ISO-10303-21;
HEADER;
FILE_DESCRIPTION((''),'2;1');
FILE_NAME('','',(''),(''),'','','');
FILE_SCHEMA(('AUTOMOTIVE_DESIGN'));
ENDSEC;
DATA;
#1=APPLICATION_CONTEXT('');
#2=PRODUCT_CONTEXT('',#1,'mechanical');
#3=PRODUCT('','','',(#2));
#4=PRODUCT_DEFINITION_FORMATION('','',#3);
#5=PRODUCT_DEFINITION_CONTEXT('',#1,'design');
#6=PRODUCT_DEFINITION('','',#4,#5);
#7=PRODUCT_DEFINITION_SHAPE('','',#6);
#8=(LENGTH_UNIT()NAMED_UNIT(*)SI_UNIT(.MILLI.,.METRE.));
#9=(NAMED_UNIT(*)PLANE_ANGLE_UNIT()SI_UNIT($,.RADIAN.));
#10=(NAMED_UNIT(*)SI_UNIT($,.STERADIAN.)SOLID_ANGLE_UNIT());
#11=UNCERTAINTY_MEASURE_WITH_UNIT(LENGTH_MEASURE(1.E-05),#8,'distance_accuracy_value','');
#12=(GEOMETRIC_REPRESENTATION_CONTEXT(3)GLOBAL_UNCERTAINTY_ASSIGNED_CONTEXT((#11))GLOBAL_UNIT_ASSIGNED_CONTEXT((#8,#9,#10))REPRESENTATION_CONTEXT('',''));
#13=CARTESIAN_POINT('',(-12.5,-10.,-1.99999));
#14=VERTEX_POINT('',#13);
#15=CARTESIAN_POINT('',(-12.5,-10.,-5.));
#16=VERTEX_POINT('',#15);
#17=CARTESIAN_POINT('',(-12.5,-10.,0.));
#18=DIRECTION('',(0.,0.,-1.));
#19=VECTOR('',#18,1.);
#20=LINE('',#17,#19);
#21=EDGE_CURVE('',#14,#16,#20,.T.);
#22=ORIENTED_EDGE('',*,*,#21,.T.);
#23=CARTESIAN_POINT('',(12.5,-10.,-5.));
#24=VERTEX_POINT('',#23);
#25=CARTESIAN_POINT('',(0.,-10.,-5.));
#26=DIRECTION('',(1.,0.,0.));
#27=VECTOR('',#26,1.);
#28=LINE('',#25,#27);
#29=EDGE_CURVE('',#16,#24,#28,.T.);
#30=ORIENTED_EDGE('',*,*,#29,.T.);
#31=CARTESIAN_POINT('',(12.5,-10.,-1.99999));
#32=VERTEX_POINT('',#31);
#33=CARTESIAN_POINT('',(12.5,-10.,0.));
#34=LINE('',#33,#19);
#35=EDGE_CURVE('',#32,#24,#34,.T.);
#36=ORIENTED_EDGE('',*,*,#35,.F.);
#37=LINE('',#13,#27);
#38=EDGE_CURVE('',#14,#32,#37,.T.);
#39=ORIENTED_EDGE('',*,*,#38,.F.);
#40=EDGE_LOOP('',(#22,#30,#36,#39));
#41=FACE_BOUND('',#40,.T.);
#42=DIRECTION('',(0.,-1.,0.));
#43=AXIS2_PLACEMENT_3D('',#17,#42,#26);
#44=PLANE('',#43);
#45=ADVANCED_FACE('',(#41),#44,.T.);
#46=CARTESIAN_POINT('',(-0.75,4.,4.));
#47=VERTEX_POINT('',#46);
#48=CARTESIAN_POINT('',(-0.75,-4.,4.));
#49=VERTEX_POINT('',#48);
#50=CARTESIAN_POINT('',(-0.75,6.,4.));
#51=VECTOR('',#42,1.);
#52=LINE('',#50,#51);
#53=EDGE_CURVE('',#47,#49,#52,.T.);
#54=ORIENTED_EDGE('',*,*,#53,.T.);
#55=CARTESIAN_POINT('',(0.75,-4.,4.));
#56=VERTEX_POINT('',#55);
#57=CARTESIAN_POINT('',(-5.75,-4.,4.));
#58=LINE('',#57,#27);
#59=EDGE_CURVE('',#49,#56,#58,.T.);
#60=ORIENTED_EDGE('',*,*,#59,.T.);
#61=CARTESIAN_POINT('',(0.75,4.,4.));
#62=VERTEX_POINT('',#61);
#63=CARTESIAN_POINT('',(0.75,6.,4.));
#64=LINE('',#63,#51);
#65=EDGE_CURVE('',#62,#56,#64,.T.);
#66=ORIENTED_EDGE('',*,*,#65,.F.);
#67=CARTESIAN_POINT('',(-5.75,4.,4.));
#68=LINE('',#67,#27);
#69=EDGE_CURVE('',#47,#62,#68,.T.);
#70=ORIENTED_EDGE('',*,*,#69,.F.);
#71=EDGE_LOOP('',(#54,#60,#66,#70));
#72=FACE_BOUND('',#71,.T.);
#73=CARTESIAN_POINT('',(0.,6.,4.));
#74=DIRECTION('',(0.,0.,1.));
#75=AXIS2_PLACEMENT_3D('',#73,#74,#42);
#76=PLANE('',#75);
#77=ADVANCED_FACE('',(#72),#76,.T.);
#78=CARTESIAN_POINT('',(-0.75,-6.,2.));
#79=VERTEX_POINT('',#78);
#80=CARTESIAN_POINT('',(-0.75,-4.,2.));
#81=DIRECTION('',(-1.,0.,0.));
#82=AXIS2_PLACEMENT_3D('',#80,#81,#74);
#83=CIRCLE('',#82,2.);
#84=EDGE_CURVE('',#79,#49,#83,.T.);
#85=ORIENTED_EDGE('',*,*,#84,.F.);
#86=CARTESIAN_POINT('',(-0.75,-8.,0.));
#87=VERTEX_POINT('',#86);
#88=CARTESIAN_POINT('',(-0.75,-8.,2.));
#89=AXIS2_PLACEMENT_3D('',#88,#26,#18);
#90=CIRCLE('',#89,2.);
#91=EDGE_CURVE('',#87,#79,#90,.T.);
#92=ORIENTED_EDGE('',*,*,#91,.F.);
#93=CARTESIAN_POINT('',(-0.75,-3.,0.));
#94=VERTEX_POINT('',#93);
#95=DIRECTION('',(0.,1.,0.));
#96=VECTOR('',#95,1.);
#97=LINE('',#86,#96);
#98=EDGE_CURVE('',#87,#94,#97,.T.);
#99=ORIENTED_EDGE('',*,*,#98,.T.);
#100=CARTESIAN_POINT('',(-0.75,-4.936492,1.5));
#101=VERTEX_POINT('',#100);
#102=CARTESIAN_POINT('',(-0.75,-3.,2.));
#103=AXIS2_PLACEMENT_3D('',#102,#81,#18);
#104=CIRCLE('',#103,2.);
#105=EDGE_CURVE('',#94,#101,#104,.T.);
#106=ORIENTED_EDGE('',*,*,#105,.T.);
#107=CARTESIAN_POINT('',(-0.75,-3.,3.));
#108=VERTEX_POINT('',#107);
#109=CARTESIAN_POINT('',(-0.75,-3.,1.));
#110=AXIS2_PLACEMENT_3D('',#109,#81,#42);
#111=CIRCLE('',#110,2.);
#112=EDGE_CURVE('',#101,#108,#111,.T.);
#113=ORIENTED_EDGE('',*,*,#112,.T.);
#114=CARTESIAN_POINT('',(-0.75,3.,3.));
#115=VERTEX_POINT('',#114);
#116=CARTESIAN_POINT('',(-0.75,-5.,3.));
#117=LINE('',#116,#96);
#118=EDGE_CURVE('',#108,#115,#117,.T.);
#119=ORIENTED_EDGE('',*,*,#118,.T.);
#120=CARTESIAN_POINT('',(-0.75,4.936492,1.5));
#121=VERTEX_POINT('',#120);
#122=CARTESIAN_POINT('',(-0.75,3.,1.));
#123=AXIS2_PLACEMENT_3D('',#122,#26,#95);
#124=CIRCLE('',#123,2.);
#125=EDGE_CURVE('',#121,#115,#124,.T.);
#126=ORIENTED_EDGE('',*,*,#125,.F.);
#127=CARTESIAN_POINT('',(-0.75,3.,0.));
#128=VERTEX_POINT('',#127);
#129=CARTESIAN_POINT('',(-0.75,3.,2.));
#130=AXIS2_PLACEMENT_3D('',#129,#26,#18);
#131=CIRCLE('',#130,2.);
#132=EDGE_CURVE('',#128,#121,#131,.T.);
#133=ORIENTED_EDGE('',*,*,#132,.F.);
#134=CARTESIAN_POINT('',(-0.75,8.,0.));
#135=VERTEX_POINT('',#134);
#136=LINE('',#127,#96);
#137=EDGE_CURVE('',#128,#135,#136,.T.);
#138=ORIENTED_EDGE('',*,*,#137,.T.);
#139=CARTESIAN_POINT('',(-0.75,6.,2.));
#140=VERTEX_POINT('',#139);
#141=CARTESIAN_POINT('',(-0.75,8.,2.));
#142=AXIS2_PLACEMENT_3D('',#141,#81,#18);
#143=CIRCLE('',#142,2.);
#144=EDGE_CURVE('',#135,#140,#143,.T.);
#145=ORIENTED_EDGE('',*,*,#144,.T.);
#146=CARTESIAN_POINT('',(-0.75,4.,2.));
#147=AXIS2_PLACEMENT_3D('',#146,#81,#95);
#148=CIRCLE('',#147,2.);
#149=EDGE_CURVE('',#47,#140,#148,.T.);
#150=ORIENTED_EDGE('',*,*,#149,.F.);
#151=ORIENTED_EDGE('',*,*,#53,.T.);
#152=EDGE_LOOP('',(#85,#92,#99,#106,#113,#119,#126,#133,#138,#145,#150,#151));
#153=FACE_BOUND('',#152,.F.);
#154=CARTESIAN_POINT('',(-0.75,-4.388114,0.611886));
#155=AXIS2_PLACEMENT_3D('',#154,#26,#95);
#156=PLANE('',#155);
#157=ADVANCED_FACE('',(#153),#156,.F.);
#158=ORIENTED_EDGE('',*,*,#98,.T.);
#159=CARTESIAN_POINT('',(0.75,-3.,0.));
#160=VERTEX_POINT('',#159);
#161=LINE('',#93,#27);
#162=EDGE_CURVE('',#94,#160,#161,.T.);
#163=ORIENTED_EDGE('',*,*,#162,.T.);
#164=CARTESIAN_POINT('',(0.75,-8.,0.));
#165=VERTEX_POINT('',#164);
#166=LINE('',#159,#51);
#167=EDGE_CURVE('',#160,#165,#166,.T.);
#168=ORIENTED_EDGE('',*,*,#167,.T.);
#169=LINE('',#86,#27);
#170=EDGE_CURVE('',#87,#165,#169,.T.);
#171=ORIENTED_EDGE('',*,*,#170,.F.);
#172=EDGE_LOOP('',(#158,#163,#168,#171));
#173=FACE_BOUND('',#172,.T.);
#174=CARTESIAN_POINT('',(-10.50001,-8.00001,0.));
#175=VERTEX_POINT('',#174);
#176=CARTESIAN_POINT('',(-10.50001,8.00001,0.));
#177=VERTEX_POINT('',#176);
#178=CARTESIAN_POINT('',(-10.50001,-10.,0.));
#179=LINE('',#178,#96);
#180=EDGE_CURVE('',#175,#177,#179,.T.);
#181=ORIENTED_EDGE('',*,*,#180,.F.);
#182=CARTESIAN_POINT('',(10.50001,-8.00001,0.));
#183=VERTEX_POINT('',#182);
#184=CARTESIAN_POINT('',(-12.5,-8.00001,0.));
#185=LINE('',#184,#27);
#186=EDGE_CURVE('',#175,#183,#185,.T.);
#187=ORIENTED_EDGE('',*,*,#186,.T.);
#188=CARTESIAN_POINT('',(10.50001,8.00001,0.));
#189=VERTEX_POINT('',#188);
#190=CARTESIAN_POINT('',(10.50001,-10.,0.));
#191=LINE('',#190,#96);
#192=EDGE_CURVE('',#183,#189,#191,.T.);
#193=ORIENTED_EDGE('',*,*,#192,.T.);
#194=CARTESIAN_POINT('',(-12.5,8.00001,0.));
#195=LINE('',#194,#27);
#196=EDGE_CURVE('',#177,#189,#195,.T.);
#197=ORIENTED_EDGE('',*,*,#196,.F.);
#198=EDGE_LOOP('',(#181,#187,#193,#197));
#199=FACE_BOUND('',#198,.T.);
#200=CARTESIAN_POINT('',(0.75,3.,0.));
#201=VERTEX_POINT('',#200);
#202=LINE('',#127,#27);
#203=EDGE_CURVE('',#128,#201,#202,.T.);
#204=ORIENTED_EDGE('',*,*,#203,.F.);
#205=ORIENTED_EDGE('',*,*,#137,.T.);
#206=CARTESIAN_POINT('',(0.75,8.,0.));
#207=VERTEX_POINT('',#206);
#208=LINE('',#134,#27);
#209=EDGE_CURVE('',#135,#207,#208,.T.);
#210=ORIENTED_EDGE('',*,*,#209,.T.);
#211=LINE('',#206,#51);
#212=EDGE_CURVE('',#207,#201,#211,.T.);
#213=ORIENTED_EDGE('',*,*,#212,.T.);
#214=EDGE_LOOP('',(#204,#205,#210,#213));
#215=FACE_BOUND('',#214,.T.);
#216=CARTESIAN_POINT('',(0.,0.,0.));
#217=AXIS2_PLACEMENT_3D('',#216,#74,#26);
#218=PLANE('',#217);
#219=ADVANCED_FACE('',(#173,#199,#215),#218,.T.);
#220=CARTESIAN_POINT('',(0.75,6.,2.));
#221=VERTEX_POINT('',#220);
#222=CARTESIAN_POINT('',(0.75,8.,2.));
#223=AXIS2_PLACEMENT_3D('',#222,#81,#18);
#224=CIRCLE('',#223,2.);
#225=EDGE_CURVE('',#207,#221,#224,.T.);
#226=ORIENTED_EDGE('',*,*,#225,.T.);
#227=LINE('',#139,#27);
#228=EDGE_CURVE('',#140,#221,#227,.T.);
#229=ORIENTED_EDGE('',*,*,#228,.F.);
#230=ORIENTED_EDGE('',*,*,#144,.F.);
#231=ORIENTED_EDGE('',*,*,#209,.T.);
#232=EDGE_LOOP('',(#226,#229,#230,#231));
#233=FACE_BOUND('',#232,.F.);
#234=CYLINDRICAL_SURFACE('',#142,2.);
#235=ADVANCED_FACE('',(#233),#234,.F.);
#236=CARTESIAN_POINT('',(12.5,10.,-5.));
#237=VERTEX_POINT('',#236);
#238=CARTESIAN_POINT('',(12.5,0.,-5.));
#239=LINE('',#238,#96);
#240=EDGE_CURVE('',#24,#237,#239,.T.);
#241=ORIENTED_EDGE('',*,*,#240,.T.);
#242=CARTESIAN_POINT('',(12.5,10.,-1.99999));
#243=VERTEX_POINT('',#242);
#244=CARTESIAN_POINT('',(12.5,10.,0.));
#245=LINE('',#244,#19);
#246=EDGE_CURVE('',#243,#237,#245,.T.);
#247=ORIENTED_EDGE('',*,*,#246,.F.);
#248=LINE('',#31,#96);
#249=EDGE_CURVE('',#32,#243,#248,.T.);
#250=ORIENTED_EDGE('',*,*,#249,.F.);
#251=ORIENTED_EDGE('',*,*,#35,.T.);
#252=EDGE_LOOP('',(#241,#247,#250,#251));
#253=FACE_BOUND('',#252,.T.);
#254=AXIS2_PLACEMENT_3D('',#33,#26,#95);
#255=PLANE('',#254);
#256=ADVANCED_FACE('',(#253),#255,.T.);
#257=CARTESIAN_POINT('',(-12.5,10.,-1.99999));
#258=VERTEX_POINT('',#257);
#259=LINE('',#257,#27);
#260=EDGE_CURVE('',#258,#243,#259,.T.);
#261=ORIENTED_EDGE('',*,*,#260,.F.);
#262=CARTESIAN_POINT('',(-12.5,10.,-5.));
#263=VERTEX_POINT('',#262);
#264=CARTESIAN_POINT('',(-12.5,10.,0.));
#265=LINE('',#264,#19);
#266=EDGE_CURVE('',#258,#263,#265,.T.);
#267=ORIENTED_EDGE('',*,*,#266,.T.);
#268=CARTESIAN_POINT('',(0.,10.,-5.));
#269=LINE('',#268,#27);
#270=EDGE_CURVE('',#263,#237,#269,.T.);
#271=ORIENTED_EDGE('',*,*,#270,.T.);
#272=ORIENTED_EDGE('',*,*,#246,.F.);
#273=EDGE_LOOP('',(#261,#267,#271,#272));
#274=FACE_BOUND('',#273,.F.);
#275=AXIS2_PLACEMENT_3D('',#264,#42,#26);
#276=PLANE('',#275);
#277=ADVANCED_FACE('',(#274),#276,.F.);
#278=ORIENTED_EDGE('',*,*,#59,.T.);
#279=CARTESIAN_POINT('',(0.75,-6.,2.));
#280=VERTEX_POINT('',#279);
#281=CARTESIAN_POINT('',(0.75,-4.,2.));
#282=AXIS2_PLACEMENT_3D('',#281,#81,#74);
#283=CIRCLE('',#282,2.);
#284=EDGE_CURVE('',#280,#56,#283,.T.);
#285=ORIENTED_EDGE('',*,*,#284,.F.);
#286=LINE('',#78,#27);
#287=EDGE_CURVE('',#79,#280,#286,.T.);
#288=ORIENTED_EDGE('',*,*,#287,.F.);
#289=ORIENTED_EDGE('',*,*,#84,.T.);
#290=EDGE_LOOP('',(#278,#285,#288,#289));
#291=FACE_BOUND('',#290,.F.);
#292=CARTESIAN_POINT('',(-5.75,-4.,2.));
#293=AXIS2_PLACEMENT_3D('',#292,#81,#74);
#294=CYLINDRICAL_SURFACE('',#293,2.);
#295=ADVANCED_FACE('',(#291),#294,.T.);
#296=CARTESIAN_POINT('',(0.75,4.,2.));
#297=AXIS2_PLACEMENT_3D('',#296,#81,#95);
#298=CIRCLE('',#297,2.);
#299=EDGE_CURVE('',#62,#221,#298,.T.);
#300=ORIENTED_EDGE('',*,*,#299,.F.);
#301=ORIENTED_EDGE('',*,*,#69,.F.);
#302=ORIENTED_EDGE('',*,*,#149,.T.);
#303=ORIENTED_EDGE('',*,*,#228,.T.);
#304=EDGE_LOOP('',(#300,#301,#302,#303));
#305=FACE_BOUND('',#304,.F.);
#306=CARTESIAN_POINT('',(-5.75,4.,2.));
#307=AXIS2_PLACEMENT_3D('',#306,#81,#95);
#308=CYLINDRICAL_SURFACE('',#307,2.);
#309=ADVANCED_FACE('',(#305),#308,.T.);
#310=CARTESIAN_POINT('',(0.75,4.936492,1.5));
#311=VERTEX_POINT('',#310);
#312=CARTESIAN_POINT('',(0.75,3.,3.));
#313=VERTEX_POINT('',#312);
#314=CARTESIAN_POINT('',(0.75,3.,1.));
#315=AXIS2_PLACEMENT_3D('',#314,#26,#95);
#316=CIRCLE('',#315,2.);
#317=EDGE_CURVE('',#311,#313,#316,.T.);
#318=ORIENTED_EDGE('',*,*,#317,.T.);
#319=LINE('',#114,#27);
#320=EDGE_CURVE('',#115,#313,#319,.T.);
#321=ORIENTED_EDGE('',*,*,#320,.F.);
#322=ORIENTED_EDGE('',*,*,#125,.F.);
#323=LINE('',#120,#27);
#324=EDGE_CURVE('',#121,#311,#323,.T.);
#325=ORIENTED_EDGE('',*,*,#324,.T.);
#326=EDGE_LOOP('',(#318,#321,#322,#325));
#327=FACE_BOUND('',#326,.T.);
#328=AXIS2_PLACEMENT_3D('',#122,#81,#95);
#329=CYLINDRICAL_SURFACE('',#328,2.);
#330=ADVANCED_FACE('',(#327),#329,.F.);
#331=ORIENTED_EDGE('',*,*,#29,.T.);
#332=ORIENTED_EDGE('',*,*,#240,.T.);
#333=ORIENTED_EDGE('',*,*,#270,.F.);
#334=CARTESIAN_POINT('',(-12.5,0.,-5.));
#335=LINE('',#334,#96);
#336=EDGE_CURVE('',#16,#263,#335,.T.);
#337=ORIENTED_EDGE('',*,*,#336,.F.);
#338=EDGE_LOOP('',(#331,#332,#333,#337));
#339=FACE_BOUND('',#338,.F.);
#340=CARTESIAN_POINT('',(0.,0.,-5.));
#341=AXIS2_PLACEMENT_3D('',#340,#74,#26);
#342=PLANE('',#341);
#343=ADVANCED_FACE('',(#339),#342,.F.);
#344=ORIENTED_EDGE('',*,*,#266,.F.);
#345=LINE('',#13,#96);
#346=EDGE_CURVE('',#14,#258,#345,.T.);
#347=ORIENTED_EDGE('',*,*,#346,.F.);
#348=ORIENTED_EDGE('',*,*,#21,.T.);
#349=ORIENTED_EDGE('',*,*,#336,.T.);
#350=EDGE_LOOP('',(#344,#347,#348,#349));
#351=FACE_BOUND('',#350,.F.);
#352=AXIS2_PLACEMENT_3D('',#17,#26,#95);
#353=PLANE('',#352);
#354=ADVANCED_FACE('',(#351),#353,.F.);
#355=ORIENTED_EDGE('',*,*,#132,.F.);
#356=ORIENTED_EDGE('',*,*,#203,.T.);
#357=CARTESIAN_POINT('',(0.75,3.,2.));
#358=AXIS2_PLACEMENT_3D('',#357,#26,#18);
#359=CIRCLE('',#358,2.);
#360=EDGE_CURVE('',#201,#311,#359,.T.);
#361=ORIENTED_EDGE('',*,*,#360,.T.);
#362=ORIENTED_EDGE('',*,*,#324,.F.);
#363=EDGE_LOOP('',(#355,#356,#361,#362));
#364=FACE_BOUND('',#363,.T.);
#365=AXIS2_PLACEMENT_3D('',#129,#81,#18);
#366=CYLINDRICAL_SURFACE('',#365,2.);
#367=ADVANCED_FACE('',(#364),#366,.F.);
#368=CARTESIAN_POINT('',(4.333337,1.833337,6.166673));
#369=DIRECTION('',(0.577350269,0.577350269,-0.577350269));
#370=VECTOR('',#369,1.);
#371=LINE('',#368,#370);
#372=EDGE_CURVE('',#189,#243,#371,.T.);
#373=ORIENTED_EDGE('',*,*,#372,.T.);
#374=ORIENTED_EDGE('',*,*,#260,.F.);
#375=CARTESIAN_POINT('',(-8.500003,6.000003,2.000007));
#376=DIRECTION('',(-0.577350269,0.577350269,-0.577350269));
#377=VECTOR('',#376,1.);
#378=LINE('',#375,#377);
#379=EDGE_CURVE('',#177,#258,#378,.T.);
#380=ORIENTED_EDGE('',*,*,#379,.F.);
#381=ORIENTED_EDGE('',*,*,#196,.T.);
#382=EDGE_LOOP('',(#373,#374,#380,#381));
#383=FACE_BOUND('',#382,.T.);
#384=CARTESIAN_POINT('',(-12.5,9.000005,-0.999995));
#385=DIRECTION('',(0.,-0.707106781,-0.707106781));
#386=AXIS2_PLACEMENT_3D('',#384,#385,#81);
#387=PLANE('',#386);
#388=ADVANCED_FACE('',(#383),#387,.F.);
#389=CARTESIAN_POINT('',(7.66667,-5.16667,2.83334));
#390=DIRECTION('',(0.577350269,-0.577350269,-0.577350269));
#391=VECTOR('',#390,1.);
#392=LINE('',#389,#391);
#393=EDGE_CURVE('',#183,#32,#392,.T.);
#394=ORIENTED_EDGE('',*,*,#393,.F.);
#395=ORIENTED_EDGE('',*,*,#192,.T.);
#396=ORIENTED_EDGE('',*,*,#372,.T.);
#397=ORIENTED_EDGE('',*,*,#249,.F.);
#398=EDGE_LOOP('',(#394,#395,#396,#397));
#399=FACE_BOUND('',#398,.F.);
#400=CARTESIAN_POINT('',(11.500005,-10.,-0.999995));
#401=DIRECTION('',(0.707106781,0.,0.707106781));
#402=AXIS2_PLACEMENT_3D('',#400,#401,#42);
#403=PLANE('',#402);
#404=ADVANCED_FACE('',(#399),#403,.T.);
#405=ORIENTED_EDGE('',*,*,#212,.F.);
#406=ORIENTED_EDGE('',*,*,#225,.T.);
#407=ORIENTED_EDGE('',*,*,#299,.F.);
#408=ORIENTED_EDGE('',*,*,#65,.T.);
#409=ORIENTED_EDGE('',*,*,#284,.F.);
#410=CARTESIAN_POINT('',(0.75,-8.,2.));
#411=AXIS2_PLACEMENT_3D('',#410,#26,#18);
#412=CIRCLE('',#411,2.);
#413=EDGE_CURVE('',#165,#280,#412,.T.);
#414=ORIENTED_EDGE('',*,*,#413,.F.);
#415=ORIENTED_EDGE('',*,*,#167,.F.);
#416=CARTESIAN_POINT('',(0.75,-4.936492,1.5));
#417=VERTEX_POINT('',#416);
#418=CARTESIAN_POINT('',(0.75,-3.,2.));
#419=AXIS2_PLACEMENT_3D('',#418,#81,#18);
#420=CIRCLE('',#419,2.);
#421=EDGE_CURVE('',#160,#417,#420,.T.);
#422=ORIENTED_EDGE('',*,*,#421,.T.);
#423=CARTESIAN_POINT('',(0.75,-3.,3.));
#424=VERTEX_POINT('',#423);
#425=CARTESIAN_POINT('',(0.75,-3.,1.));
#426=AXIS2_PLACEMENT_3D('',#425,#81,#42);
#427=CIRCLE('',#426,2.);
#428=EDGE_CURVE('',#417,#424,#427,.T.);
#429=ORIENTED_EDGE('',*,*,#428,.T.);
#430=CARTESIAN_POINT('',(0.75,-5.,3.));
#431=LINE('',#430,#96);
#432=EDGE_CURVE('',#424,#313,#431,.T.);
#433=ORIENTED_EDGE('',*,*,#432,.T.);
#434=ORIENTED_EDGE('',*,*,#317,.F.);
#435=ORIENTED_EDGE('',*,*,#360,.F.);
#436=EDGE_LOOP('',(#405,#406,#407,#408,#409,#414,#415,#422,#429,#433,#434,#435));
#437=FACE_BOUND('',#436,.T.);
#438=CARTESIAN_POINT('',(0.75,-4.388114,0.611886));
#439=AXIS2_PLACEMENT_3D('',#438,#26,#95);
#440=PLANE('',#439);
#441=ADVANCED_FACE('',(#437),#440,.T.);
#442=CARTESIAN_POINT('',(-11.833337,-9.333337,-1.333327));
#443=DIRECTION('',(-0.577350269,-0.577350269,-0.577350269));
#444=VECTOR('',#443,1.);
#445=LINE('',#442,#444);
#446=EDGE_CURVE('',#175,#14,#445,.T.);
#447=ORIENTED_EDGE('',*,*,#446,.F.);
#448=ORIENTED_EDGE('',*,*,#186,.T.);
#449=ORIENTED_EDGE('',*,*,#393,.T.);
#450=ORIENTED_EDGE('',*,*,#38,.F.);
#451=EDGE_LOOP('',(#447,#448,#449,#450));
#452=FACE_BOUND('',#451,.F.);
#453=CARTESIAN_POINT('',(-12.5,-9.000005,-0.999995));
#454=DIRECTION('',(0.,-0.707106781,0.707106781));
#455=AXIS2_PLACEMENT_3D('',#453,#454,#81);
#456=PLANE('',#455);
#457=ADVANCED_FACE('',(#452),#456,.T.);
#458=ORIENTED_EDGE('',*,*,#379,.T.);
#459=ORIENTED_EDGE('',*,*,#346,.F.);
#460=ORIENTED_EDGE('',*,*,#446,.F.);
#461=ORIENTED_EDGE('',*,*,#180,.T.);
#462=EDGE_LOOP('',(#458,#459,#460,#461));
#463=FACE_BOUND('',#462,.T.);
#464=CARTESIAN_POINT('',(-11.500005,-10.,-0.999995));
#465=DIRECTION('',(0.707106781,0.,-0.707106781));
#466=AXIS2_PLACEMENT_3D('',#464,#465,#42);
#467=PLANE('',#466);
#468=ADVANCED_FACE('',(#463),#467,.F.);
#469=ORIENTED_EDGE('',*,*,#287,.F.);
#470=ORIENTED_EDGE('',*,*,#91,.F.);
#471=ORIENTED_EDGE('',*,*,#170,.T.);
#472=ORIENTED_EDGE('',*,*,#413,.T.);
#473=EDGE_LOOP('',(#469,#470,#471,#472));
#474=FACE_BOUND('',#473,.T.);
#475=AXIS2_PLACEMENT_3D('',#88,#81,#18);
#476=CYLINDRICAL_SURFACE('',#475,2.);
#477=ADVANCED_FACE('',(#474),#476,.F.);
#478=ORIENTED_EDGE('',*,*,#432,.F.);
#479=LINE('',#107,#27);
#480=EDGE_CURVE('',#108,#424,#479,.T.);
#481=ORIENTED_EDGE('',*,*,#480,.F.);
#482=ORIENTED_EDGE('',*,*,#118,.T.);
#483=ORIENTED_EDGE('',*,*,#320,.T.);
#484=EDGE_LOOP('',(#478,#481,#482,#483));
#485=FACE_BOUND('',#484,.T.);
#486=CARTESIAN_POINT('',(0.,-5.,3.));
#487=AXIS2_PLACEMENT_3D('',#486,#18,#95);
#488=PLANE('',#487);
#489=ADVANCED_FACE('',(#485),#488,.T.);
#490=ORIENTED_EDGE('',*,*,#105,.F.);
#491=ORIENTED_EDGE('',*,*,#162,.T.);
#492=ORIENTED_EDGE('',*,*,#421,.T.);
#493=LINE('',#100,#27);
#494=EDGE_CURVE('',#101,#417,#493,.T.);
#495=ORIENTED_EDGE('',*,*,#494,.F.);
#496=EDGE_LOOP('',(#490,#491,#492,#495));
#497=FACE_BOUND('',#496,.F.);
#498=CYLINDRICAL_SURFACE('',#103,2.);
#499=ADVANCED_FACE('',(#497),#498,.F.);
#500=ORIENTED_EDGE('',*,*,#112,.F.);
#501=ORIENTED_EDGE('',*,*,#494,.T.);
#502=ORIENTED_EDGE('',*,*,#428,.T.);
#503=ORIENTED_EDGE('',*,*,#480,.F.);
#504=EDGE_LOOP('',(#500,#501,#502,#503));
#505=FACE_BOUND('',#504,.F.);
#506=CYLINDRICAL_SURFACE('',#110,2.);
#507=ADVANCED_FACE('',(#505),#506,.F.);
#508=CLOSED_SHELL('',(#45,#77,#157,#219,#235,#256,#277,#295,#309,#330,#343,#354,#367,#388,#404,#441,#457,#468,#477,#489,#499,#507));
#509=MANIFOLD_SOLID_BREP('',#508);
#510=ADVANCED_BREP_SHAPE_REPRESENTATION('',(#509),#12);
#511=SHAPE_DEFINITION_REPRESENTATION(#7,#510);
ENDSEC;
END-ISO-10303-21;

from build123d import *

# Parameters (mm, degrees)
F0_W        = 25
F0_H        = 20
F1_DEPTH    = 5
F3_DEPTH    = 0.75
F4_T1_DEPTH = 1.5
F4_T3_DEPTH = 11.5
F5_SIZE     = 1.99999


# Not quite as in the source:
# - a fillet or chamfer that OpenCascade refuses, or shapes differently, is made with other operations: its cross-section is extruded or revolved along the edge and cut away or added
# - a fillet or chamfer is up to 0.001 mm smaller than in the source, because OpenCascade refuses the exact size


with BuildPart() as f1:
    # F0 (on Top) → F1 (new body)
    with BuildSketch(Plane.XY):
        Rectangle(F0_W, F0_H)
    extrude(amount=-F1_DEPTH)

    # F2 (on Right) → F3 (join, symmetric)
    with BuildSketch(Plane.YZ):
        Polygon((-6, 4), (-6, 0), (-5, 0), (-5, 3), (5, 3), (5, 0), (6, 0), (6, 4), align=None)
    extrude(amount=F3_DEPTH, both=True)

    # F4: fillet of radius 2 on 8 edges, made by hand

    # F4_s2 → F4_t1 (join)
    with BuildSketch(Plane.YZ.offset(-0.75)):
        with BuildLine():
            ThreePointArc((-3, 0), (-4.4142135624, 0.5857864376), (-5, 2))
            Line((-5, 2), (-5, 0))
            Line((-5, 0), (-3, 0))
        make_face()
        with BuildLine():
            ThreePointArc((3, 0), (4.4142135624, 0.5857864376), (5, 2))
            Line((5, 2), (5, 0))
            Line((5, 0), (3, 0))
        make_face()
        with BuildLine():
            ThreePointArc((-8, 0), (-6.5857864376, 0.5857864376), (-6, 2))
            Line((-6, 2), (-6, 0))
            Line((-6, 0), (-8, 0))
        make_face()
        with BuildLine():
            ThreePointArc((8, 0), (6.5857864376, 0.5857864376), (6, 2))
            Line((6, 2), (6, 0))
            Line((6, 0), (8, 0))
        make_face()
        with BuildLine():
            ThreePointArc((-5, 1), (-4.4142135624, 2.4142135624), (-3, 3))
            Line((-3, 3), (-5, 3))
            Line((-5, 3), (-5, 1))
        make_face()
        with BuildLine():
            ThreePointArc((5, 1), (4.4142135624, 2.4142135624), (3, 3))
            Line((3, 3), (5, 3))
            Line((5, 3), (5, 1))
        make_face()
    extrude(amount=F4_T1_DEPTH)

    # F4_s4 → F4_t3 (cut)
    with BuildSketch(Plane.YZ.offset(-5.75)):
        with BuildLine():
            ThreePointArc((-4, 4), (-5.4142135624, 3.4142135624), (-6, 2))
            Line((-6, 2), (-6, 4))
            Line((-6, 4), (-4, 4))
        make_face()
        with BuildLine():
            ThreePointArc((6, 2), (5.4142135624, 3.4142135624), (4, 4))
            Line((4, 4), (6, 4))
            Line((6, 4), (6, 2))
        make_face()
    extrude(amount=F4_T3_DEPTH, mode=Mode.SUBTRACT)

    # F5 (size 2 in the source; OpenCascade refuses exactly that, so slightly less here)
    f5_edges = [f1.edges().sort_by_distance(p)[0] for p in [
        (12.5, 0, 0),
        (0, -10, 0),
        (0, 10, 0),
        (-12.5, 0, 0),
    ]]
    chamfer(f5_edges, length=F5_SIZE)


solid = f1.part
